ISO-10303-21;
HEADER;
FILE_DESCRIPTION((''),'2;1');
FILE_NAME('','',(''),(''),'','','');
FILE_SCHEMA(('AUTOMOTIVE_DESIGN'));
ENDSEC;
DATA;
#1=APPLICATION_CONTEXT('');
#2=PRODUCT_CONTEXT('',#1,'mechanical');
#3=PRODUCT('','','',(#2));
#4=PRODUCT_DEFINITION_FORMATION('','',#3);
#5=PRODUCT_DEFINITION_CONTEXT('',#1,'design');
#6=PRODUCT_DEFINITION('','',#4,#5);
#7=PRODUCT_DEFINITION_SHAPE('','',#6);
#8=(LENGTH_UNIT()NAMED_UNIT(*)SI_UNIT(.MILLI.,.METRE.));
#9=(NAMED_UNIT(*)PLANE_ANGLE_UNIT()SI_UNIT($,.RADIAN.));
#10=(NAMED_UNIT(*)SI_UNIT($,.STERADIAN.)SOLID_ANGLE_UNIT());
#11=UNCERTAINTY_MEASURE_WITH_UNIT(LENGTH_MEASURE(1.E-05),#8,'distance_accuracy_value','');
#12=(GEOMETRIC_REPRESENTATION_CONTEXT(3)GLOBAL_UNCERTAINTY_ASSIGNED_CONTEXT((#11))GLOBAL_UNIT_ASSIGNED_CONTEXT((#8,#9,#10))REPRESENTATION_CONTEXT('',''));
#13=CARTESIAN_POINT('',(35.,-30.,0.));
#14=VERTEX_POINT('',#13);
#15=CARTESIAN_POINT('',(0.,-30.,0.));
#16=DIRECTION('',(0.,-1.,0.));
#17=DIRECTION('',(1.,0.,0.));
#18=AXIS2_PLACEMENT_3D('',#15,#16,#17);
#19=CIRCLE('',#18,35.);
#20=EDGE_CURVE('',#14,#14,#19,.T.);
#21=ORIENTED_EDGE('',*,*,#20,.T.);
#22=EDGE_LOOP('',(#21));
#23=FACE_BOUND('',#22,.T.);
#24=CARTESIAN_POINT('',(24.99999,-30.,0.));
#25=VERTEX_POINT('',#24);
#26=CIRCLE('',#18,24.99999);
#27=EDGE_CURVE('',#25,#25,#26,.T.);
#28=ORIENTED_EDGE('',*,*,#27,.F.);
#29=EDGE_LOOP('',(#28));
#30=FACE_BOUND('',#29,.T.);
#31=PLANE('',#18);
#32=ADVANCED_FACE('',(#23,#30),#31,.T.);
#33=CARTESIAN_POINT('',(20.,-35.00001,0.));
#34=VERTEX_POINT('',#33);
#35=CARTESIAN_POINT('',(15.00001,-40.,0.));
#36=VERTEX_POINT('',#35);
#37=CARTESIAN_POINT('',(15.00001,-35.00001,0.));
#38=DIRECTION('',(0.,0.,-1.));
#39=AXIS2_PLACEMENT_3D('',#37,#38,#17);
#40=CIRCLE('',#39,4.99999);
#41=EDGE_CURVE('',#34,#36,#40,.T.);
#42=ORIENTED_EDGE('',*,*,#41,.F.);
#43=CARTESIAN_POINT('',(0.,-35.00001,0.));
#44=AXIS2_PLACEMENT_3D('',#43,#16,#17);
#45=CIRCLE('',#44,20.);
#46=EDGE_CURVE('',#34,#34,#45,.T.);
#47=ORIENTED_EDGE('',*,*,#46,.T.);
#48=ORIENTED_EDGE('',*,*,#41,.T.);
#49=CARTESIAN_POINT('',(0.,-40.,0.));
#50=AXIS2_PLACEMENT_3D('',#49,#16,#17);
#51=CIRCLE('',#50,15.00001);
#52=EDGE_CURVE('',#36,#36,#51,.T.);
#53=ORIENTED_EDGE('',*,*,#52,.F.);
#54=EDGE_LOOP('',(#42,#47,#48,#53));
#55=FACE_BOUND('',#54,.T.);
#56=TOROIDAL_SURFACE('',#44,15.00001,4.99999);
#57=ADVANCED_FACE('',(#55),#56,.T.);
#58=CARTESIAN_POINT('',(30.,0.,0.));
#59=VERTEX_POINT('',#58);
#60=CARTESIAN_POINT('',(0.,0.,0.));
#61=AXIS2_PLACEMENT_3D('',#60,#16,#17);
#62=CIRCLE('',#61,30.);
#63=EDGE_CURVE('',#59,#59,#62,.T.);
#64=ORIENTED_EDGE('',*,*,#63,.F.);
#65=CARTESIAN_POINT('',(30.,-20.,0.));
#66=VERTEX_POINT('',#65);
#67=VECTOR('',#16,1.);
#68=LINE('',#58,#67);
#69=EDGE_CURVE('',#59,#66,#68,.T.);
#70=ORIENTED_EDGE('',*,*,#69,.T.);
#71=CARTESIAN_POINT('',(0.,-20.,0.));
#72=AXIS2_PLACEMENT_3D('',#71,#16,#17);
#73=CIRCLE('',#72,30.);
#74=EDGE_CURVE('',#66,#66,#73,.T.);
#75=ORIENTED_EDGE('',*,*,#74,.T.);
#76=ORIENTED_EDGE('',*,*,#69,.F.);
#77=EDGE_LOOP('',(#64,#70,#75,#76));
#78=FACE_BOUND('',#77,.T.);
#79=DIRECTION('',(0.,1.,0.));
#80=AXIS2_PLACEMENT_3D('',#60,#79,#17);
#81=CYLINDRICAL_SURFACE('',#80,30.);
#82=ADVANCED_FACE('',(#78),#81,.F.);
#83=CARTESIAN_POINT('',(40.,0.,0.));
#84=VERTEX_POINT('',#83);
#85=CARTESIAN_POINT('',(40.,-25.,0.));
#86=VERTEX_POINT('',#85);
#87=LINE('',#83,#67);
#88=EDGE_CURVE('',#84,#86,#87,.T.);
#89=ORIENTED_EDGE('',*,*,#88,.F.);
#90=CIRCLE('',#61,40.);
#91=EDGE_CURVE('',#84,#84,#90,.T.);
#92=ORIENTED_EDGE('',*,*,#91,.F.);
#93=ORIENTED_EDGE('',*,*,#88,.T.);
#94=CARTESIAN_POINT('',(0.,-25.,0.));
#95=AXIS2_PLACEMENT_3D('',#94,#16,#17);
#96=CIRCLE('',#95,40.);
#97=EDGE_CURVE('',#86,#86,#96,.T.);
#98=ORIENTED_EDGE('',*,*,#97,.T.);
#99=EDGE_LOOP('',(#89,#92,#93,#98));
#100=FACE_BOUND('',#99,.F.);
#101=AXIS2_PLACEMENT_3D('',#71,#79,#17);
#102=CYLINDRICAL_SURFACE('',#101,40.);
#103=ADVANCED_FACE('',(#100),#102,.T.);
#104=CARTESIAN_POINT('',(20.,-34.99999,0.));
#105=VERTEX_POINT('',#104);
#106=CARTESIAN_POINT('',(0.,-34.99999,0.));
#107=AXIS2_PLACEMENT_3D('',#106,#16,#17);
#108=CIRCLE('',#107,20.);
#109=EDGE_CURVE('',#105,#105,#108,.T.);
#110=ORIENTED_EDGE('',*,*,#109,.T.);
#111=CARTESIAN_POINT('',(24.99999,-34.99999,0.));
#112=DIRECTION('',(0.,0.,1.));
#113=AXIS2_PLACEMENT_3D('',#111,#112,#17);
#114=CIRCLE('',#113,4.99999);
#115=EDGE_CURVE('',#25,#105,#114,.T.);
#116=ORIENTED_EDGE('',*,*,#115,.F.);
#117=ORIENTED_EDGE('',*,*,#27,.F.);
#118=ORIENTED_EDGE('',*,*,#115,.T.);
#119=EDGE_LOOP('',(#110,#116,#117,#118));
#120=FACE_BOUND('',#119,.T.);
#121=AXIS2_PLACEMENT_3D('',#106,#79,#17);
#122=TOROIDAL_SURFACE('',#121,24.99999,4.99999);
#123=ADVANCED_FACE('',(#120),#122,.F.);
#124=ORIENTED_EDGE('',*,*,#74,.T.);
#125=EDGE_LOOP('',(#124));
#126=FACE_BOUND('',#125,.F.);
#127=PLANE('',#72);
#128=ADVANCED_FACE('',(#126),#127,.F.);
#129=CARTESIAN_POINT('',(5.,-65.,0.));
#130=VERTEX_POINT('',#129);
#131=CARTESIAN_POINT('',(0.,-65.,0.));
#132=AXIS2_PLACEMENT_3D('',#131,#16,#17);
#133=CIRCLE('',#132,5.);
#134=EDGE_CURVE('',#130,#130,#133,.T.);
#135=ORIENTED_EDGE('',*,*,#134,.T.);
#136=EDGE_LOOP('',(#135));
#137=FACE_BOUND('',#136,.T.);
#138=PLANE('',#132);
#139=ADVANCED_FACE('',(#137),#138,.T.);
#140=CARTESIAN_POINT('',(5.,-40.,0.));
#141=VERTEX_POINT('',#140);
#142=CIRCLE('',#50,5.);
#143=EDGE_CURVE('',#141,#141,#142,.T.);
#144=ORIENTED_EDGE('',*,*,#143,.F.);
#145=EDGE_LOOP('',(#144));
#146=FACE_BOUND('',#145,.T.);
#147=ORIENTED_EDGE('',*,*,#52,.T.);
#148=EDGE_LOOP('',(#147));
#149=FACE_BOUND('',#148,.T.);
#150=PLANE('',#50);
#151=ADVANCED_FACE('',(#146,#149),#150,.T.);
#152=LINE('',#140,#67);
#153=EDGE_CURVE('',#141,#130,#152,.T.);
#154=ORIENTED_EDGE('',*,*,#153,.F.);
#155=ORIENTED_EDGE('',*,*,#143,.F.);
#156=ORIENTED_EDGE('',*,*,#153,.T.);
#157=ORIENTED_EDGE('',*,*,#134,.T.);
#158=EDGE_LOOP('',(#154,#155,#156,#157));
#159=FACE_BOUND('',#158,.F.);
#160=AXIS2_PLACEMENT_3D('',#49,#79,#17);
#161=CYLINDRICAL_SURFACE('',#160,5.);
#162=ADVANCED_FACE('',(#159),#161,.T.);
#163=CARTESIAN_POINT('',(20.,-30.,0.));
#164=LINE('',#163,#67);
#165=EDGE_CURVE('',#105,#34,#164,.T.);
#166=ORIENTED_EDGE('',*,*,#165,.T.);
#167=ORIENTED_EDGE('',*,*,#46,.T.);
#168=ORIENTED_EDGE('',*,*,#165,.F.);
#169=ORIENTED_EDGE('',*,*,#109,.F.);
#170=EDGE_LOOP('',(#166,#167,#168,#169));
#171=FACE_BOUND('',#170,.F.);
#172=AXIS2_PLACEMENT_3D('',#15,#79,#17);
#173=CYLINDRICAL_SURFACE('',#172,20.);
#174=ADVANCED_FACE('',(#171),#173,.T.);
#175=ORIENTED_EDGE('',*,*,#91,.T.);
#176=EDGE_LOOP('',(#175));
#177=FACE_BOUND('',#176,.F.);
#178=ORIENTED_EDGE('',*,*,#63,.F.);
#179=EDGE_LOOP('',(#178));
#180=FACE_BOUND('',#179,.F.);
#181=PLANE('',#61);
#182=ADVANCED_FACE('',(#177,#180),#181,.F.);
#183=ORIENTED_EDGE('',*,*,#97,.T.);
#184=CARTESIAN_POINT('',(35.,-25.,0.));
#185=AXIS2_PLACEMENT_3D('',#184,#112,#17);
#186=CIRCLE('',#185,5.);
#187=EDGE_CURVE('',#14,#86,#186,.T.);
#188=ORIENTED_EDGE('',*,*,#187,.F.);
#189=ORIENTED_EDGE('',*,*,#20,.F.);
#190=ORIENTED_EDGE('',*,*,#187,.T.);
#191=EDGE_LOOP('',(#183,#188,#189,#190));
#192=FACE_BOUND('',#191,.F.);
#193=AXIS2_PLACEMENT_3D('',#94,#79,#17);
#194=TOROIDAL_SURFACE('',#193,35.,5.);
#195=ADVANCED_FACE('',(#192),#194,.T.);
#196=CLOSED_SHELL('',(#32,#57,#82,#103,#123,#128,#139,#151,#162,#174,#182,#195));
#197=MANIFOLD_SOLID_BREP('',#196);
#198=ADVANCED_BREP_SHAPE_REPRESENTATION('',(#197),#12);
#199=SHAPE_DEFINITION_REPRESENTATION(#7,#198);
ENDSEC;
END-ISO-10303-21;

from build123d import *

# Parameters (mm, degrees)
F0_R     = 40
F0_R_2   = 30
F1_DEPTH = 20
F2_R     = 40
F2_R_2   = 30
F3_DEPTH = 10
F4_R     = 20
F5_DEPTH = 10
F6_R     = 5
F7_DEPTH = 25
F8_R     = 4.99999
F9_R     = 5


# Not quite as in the source:
# - a fillet or chamfer is up to 0.001 mm smaller than in the source, because OpenCascade refuses the exact size


with BuildPart() as f1:
    # F0 (on Front) → F1 (new body)
    with BuildSketch(Plane.XZ):
        Circle(F0_R)
        Circle(F0_R_2, mode=Mode.SUBTRACT)
    extrude(amount=F1_DEPTH)

    # F2 (on face) → F3 (join)
    with BuildSketch(Plane.XZ.offset(20)):
        Circle(F2_R)
        Circle(F2_R_2, mode=Mode.SUBTRACT)
        Circle(F2_R_2)
    extrude(amount=F3_DEPTH)

    # F4 (on face) → F5 (join)
    with BuildSketch(Plane.XZ.offset(30)):
        Circle(F4_R)
    extrude(amount=F5_DEPTH)

    # F6 (on face) → F7 (join)
    with BuildSketch(Plane.XZ.offset(40)):
        Circle(F6_R)
    extrude(amount=F7_DEPTH)

    # F8 (radius 5 in the source; OpenCascade refuses exactly that, so slightly less here)
    f8_edges = [f1.edges().sort_by_distance(p)[0] for p in [
        (-20, -30, 0),
        (-20, -40, 0),
    ]]
    fillet(f8_edges, radius=F8_R)

    # F9
    f9_edges = [f1.edges().sort_by_distance(p)[0] for p in [
        (-40, -30, 0),
    ]]
    fillet(f9_edges, radius=F9_R)


solid = f1.part
